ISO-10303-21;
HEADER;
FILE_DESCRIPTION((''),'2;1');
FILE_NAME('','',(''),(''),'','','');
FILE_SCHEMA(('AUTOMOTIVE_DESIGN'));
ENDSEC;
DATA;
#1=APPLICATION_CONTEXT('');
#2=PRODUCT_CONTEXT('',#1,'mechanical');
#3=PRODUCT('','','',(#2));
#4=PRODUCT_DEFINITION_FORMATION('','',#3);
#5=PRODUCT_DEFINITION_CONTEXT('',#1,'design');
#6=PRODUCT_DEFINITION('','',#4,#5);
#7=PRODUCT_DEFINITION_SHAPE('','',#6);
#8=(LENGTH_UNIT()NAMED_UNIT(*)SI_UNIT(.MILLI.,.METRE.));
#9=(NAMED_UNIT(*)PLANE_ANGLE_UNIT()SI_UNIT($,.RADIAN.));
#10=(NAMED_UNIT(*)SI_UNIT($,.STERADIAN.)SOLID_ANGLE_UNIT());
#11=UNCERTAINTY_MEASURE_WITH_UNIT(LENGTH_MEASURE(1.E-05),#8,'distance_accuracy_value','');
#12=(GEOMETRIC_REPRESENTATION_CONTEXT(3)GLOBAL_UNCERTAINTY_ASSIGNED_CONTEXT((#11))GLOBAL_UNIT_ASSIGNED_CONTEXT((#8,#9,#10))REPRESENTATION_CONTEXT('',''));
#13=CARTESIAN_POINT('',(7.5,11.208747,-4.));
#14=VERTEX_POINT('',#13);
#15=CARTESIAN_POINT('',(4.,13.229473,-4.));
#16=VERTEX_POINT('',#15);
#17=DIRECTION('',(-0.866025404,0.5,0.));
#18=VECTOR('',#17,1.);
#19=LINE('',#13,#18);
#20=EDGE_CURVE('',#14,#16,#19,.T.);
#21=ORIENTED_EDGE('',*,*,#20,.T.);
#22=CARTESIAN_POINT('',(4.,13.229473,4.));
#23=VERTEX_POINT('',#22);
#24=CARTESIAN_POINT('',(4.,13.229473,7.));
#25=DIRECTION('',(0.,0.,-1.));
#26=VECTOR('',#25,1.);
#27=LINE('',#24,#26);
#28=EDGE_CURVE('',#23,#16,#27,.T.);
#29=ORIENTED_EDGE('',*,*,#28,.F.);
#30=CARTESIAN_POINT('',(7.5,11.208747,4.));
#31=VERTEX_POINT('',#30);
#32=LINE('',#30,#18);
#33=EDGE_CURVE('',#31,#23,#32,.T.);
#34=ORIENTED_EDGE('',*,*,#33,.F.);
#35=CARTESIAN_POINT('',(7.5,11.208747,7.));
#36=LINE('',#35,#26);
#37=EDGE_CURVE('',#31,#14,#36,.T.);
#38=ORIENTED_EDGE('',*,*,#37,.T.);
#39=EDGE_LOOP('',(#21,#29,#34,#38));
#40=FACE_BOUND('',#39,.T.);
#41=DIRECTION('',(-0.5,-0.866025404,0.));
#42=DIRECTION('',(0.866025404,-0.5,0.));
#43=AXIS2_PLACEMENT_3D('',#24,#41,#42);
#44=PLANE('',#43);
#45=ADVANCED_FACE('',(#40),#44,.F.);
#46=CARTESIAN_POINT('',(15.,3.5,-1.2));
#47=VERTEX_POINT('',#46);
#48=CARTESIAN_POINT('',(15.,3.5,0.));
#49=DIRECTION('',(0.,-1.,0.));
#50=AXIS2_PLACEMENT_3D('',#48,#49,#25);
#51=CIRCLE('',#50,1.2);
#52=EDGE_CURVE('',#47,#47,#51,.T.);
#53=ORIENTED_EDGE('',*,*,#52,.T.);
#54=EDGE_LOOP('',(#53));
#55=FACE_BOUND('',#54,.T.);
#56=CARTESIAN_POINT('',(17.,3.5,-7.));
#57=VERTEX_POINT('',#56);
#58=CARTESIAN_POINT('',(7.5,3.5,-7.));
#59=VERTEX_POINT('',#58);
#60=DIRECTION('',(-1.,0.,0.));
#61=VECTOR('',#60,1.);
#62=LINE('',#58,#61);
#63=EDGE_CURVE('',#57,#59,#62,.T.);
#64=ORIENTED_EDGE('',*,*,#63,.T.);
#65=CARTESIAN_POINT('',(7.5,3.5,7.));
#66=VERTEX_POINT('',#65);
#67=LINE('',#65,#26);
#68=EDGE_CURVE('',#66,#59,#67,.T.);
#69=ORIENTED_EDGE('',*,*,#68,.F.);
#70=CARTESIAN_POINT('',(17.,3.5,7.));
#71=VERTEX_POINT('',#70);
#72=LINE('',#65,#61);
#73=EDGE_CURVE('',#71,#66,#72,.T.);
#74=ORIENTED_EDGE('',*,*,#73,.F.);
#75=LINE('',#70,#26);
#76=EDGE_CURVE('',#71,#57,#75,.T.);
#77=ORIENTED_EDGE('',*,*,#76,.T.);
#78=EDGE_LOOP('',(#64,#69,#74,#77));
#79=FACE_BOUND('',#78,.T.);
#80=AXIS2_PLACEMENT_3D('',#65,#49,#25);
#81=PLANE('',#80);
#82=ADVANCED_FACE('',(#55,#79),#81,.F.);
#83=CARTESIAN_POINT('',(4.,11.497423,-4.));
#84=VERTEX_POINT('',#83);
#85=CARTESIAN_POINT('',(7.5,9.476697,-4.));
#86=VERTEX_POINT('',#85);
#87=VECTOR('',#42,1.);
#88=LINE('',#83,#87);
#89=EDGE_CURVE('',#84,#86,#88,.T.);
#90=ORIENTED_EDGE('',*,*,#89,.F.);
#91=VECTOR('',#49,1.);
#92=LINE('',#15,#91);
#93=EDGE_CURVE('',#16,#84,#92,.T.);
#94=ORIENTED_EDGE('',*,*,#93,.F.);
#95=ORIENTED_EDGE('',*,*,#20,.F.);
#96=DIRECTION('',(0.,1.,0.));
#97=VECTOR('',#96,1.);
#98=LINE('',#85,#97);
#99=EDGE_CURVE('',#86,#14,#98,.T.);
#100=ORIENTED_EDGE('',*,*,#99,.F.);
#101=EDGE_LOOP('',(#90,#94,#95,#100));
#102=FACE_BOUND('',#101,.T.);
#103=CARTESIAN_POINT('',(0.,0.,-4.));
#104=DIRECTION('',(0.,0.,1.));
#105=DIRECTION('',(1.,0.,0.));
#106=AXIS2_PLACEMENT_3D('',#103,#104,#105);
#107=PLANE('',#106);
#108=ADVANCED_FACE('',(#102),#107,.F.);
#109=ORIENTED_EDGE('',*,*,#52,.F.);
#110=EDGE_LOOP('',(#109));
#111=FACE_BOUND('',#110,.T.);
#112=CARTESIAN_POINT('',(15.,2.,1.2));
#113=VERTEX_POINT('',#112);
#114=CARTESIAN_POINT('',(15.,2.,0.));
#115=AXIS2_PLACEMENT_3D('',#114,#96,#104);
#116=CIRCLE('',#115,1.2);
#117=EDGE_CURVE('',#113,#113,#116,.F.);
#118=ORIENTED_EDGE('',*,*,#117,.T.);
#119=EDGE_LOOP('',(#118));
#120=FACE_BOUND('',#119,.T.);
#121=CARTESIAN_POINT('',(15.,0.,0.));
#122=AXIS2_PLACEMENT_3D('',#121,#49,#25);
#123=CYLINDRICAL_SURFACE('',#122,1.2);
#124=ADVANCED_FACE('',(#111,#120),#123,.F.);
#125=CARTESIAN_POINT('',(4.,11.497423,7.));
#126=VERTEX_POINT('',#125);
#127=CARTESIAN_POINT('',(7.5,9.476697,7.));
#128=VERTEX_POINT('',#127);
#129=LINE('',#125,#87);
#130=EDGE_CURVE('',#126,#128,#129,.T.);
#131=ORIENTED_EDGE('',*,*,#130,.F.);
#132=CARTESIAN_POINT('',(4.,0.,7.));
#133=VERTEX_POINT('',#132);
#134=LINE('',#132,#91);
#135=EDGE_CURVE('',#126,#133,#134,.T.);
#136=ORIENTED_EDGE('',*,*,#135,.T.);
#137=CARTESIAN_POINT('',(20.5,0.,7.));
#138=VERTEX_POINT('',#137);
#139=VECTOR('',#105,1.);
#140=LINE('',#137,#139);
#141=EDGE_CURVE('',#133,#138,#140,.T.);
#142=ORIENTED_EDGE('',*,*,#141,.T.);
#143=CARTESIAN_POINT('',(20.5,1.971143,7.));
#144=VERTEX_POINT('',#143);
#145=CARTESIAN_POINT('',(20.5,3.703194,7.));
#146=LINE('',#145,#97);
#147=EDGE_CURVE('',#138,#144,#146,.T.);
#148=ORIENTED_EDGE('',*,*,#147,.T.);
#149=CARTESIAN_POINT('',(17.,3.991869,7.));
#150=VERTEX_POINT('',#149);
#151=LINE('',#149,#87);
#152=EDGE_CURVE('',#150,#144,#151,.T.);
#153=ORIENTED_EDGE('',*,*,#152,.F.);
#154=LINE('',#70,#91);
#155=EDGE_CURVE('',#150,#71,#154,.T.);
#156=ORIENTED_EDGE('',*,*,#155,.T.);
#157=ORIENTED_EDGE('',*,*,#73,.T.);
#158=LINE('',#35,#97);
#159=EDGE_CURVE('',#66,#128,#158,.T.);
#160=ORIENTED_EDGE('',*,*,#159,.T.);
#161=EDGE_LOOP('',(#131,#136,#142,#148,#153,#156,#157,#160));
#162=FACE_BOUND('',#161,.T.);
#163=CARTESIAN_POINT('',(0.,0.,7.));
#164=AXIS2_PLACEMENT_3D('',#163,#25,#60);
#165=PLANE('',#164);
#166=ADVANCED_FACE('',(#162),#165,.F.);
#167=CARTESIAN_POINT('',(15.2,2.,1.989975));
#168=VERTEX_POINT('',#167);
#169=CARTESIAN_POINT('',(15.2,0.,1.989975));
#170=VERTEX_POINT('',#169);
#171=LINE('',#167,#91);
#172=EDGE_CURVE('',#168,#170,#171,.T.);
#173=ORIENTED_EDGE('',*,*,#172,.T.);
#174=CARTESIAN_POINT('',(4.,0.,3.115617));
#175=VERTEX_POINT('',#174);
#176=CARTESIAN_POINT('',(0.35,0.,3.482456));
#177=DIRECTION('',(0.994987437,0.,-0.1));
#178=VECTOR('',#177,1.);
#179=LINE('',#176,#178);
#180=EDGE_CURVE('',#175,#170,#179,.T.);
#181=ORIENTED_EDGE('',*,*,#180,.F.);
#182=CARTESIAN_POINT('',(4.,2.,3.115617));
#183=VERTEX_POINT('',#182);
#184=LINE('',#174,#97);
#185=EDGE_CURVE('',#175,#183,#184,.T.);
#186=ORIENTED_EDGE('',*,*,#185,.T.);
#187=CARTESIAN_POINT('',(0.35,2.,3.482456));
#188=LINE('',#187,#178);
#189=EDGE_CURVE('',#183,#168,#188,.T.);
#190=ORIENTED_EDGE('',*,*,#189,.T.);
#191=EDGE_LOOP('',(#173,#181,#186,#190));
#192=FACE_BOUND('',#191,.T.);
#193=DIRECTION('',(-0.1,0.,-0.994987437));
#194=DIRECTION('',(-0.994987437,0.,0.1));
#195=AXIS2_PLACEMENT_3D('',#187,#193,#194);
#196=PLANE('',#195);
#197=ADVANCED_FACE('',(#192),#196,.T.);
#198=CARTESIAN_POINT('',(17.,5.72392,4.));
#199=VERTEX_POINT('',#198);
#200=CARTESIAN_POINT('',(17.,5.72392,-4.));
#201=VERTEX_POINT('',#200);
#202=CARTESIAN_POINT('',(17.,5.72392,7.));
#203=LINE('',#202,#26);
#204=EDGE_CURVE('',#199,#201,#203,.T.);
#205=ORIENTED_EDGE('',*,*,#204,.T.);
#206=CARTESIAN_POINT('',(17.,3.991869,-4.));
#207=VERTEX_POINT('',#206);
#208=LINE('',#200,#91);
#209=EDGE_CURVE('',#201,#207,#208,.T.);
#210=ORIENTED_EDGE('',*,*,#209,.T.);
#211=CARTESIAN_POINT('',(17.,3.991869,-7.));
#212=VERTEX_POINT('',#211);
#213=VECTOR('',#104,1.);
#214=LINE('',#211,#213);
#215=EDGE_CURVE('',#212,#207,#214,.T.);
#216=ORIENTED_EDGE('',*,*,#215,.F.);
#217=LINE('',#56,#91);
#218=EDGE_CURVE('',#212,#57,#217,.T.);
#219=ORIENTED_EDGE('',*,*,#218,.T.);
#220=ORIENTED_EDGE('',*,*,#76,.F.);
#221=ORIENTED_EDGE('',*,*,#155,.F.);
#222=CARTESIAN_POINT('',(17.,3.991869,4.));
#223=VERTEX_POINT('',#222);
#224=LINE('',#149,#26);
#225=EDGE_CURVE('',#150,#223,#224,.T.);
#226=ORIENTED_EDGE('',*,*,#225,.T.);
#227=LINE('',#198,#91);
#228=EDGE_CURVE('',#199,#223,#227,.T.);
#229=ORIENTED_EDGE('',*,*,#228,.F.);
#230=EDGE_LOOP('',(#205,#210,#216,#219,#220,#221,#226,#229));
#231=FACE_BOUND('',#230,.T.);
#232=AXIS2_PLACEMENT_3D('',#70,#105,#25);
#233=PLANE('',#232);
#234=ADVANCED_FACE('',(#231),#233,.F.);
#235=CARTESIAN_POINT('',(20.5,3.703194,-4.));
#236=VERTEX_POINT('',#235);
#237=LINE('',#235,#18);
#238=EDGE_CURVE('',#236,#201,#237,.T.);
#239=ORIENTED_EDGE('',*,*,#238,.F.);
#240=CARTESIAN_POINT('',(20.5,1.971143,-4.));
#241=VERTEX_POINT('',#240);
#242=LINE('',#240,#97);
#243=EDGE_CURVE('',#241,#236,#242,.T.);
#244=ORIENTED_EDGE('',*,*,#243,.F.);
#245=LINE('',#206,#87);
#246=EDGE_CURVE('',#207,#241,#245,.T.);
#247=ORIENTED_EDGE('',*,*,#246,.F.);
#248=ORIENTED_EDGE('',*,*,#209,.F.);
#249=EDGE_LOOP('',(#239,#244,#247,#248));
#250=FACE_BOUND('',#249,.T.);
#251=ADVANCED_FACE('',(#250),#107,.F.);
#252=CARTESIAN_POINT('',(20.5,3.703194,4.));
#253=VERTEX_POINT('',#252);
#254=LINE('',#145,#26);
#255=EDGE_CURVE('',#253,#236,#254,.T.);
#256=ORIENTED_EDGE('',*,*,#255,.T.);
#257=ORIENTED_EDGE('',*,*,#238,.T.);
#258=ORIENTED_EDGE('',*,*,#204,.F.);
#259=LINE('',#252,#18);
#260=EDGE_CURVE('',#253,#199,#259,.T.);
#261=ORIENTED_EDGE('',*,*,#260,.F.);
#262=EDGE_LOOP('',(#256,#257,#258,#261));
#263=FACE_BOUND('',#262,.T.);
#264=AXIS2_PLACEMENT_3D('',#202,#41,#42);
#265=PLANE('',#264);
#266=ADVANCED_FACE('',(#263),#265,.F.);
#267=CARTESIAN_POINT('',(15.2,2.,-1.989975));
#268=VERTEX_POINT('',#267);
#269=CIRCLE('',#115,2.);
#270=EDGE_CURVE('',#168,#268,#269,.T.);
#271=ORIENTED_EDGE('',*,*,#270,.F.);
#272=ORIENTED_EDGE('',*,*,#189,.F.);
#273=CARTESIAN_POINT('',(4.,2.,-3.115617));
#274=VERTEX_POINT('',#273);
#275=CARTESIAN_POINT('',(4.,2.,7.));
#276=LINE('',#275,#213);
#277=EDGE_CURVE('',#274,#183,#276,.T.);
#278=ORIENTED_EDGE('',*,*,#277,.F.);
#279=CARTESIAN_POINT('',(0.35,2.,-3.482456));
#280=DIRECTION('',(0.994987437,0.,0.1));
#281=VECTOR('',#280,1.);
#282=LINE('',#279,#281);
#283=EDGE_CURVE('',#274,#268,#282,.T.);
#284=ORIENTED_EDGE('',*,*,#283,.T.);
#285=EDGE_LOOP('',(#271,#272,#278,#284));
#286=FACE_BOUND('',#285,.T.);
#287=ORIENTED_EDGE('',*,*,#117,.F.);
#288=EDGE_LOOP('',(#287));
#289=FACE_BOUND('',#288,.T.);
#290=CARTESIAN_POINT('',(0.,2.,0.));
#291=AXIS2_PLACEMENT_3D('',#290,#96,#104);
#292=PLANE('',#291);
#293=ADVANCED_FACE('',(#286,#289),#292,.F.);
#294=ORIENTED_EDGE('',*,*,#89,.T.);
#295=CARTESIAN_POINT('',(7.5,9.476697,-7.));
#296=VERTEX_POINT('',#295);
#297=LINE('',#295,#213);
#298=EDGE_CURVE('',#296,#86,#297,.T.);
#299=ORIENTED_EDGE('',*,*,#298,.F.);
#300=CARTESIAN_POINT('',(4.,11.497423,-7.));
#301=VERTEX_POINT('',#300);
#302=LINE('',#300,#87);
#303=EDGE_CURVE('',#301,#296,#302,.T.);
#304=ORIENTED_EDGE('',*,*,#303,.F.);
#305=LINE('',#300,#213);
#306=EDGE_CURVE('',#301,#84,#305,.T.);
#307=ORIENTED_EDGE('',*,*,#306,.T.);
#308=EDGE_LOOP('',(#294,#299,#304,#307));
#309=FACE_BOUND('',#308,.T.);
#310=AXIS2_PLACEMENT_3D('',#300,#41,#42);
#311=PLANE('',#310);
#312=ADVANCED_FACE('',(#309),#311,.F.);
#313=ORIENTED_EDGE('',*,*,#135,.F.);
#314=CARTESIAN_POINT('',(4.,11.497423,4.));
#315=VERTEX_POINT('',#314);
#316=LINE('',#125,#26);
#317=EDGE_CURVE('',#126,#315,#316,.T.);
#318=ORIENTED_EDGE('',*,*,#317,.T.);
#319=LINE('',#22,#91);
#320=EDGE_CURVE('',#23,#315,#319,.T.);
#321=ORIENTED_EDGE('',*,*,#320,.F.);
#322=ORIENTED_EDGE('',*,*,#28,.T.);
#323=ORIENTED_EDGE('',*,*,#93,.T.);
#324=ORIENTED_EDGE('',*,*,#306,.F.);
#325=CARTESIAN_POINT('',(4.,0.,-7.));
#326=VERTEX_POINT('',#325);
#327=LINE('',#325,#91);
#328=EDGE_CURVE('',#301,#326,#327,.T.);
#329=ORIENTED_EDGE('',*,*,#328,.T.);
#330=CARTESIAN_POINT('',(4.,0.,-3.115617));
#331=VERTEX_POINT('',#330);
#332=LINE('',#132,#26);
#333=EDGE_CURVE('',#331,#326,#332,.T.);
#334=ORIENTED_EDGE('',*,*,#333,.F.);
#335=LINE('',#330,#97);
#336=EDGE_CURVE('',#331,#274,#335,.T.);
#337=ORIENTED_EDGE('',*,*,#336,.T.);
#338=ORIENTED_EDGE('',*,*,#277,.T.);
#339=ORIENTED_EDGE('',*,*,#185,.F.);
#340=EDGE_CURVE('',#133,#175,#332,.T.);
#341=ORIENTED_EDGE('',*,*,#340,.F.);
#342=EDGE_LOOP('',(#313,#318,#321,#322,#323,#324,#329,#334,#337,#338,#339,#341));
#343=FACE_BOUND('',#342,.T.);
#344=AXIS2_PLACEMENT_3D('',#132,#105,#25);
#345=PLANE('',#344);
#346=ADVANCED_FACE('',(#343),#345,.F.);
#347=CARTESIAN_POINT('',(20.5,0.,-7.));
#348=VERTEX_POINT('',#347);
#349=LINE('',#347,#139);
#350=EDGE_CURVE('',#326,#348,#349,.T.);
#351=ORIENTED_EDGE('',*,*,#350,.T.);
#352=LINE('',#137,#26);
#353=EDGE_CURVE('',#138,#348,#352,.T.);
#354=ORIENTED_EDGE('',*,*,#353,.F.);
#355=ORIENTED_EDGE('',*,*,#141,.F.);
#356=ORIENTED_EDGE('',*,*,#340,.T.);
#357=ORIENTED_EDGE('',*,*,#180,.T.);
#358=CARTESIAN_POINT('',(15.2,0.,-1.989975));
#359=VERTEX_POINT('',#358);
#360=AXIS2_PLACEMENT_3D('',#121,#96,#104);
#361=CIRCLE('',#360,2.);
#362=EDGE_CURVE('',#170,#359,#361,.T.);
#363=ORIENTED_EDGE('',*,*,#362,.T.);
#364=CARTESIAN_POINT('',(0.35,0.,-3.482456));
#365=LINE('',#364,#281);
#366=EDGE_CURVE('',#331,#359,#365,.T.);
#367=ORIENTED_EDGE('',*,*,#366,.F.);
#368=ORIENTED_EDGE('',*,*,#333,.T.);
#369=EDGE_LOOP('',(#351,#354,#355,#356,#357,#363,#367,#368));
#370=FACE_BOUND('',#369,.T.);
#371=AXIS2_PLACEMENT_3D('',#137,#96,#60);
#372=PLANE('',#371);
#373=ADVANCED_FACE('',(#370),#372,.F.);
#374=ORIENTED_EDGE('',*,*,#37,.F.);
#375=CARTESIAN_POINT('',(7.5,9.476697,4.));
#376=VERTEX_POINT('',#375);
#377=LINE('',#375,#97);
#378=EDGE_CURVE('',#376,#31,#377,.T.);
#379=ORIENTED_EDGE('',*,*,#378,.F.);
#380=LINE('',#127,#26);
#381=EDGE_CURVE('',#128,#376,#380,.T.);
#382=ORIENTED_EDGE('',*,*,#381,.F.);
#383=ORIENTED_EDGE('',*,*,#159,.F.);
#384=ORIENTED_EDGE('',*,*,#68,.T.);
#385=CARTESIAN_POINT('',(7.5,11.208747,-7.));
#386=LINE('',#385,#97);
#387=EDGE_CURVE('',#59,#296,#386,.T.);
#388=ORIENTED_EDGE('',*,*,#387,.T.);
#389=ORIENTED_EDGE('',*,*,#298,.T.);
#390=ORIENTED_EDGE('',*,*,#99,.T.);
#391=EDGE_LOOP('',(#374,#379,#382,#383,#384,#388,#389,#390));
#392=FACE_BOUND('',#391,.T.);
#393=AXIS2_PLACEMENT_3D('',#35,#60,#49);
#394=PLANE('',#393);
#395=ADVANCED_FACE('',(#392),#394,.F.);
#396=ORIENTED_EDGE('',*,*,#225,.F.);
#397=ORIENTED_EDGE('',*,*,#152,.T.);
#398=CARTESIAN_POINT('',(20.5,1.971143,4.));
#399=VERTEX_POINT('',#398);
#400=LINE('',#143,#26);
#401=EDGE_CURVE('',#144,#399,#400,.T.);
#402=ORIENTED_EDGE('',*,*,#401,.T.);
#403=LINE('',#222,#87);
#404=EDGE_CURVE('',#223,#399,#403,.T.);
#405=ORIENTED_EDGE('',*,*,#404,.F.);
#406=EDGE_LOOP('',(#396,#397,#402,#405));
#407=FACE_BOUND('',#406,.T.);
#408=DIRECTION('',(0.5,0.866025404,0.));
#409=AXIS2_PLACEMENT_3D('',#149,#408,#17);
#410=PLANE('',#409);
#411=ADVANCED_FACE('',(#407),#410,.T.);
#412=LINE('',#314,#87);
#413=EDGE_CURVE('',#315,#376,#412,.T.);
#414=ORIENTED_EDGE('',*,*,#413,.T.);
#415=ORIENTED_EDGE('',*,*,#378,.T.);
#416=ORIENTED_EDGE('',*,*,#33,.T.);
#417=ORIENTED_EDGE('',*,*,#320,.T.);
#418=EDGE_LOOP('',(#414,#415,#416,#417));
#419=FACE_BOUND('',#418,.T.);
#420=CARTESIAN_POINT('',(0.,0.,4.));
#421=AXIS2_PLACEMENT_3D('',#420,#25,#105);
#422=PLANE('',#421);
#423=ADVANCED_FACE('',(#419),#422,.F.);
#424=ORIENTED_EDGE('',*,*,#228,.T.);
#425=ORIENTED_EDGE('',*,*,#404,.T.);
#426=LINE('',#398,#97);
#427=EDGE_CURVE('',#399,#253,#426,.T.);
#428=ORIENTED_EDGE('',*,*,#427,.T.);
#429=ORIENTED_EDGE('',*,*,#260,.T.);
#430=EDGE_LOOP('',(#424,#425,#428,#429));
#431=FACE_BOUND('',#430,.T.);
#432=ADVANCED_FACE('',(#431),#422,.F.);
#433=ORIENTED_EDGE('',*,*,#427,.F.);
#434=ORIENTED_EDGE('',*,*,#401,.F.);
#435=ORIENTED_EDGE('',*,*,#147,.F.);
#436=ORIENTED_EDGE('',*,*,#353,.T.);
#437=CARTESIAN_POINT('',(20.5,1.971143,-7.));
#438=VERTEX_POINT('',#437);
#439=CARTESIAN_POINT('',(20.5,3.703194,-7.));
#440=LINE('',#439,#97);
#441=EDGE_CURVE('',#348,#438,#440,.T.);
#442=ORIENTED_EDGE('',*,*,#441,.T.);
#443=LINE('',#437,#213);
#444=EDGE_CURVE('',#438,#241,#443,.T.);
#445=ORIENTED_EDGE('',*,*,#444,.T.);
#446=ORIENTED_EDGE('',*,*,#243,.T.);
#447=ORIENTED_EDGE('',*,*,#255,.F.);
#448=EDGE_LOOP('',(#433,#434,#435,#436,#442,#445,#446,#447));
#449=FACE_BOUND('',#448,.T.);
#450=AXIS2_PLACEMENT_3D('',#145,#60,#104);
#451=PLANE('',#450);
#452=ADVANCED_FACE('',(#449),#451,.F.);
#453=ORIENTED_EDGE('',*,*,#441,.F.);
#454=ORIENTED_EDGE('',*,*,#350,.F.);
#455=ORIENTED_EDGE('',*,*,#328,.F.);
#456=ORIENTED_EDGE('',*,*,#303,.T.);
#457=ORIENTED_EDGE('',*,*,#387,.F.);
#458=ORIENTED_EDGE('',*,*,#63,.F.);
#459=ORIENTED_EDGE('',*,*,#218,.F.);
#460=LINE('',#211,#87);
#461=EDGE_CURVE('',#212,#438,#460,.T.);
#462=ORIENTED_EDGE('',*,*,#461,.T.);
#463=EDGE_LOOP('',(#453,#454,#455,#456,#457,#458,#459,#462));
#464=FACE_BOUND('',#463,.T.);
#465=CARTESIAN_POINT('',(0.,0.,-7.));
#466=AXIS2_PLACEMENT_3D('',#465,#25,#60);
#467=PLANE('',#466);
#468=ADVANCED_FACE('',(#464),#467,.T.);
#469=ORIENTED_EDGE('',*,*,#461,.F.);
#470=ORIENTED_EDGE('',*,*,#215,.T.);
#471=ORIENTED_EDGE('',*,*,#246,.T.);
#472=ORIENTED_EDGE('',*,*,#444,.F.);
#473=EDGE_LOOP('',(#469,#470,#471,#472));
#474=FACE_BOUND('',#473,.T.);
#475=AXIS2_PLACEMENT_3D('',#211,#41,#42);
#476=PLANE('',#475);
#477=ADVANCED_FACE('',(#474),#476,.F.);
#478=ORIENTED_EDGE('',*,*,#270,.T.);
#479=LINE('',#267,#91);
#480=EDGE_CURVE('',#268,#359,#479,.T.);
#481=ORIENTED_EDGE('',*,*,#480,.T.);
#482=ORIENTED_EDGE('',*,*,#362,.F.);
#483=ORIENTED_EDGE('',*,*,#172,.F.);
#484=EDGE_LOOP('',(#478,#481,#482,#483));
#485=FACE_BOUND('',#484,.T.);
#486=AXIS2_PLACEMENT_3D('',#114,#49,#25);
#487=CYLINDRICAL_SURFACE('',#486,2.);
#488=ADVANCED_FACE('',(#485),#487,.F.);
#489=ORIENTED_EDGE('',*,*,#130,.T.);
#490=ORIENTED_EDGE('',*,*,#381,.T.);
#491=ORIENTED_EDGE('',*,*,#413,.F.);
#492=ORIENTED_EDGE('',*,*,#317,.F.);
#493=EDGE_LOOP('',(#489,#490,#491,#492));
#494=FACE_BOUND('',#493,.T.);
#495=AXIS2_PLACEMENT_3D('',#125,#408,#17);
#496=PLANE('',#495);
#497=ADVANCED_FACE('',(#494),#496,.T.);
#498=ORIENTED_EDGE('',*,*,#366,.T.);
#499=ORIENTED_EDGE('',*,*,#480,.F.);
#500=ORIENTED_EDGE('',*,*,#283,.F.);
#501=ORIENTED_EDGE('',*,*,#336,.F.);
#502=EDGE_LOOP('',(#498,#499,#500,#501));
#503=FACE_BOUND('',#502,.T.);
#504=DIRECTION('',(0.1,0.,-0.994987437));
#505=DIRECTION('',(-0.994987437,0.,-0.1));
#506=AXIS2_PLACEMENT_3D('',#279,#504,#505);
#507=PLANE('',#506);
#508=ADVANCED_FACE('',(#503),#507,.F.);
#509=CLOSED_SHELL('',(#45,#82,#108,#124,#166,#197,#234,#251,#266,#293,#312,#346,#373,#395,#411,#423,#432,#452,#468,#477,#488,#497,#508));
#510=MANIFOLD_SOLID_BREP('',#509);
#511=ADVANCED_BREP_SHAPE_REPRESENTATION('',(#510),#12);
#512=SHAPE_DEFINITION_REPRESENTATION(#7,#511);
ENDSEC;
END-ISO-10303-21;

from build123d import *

# Parameters (mm, degrees)
BOSS_EXTRU_1_DEPTH      = 7
ENL_V_START             = -4
ENL_V_MAT_EXTRU_1_DEPTH = 22.382453919
D_GAGEMENT_M21_D        = 2.4
EMPREINTE1_OUTLINE_R    = 1.2
EMPREINTE1_DEPTH        = 2


# Read off the part's stored shape, not the designer's step: Empreinte1
with BuildPart() as part:
    # Esquisse1 → Boss.-Extru.1 (new, symmetric)
    with BuildSketch(Plane.XY):
        Polygon((4, 0), (4, 13.229473419), (7.5, 11.208747477), (7.5, 3.5), (17, 3.5), (17, 5.72391992), (20.5, 3.703193978), (20.5, 0), align=None)
    extrude(amount=BOSS_EXTRU_1_DEPTH, both=True)

    # Esquisse2 → Enlèv. mat.-Extru.1 (cut, through all)
    with BuildSketch(Plane.XY.offset(ENL_V_START)):
        Polygon((4, 13.229473419), (4, 11.497422612), (7.5, 9.47669667), (7.5, 11.208747477), align=None)
        Polygon((17, 5.72391992), (17, 3.991869112), (20.5, 1.97114317), (20.5, 3.703193978), align=None)
    enl_v_mat_extru_1 = extrude(amount=-ENL_V_MAT_EXTRU_1_DEPTH, mode=Mode.SUBTRACT)

    # Symétrie1: Enlèv. mat.-Extru.1 across plane
    add(enl_v_mat_extru_1.mirror(Plane.XY), mode=Mode.SUBTRACT)

    # Dégagement M21 (through all)
    with Locations(Plane(origin=(0, 0, 0), x_dir=(-1, 0, 0), z_dir=(0, -1, 0))):
        with Locations((-15, 0)):
            Hole(D_GAGEMENT_M21_D / 2)

    # Empreinte1 outline → Empreinte1 (cut)
    with BuildSketch(Plane(origin=(0, 0, 0), x_dir=(1, 0, 0), z_dir=(0, 1, 0))):
        with BuildLine():
            Line((4, -3.115617227), (15.2, -1.989974874))
            ThreePointArc((15.2, -1.989974874), (17, 0), (15.2, 1.989974874))
            Line((15.2, 1.989974874), (4, 3.115617227))
            Line((4, 3.115617227), (4, -3.115617227))
        make_face()
        with Locations((15, 0)):
            Circle(EMPREINTE1_OUTLINE_R, mode=Mode.SUBTRACT)
    extrude(amount=EMPREINTE1_DEPTH, mode=Mode.SUBTRACT)


solid = part.part
